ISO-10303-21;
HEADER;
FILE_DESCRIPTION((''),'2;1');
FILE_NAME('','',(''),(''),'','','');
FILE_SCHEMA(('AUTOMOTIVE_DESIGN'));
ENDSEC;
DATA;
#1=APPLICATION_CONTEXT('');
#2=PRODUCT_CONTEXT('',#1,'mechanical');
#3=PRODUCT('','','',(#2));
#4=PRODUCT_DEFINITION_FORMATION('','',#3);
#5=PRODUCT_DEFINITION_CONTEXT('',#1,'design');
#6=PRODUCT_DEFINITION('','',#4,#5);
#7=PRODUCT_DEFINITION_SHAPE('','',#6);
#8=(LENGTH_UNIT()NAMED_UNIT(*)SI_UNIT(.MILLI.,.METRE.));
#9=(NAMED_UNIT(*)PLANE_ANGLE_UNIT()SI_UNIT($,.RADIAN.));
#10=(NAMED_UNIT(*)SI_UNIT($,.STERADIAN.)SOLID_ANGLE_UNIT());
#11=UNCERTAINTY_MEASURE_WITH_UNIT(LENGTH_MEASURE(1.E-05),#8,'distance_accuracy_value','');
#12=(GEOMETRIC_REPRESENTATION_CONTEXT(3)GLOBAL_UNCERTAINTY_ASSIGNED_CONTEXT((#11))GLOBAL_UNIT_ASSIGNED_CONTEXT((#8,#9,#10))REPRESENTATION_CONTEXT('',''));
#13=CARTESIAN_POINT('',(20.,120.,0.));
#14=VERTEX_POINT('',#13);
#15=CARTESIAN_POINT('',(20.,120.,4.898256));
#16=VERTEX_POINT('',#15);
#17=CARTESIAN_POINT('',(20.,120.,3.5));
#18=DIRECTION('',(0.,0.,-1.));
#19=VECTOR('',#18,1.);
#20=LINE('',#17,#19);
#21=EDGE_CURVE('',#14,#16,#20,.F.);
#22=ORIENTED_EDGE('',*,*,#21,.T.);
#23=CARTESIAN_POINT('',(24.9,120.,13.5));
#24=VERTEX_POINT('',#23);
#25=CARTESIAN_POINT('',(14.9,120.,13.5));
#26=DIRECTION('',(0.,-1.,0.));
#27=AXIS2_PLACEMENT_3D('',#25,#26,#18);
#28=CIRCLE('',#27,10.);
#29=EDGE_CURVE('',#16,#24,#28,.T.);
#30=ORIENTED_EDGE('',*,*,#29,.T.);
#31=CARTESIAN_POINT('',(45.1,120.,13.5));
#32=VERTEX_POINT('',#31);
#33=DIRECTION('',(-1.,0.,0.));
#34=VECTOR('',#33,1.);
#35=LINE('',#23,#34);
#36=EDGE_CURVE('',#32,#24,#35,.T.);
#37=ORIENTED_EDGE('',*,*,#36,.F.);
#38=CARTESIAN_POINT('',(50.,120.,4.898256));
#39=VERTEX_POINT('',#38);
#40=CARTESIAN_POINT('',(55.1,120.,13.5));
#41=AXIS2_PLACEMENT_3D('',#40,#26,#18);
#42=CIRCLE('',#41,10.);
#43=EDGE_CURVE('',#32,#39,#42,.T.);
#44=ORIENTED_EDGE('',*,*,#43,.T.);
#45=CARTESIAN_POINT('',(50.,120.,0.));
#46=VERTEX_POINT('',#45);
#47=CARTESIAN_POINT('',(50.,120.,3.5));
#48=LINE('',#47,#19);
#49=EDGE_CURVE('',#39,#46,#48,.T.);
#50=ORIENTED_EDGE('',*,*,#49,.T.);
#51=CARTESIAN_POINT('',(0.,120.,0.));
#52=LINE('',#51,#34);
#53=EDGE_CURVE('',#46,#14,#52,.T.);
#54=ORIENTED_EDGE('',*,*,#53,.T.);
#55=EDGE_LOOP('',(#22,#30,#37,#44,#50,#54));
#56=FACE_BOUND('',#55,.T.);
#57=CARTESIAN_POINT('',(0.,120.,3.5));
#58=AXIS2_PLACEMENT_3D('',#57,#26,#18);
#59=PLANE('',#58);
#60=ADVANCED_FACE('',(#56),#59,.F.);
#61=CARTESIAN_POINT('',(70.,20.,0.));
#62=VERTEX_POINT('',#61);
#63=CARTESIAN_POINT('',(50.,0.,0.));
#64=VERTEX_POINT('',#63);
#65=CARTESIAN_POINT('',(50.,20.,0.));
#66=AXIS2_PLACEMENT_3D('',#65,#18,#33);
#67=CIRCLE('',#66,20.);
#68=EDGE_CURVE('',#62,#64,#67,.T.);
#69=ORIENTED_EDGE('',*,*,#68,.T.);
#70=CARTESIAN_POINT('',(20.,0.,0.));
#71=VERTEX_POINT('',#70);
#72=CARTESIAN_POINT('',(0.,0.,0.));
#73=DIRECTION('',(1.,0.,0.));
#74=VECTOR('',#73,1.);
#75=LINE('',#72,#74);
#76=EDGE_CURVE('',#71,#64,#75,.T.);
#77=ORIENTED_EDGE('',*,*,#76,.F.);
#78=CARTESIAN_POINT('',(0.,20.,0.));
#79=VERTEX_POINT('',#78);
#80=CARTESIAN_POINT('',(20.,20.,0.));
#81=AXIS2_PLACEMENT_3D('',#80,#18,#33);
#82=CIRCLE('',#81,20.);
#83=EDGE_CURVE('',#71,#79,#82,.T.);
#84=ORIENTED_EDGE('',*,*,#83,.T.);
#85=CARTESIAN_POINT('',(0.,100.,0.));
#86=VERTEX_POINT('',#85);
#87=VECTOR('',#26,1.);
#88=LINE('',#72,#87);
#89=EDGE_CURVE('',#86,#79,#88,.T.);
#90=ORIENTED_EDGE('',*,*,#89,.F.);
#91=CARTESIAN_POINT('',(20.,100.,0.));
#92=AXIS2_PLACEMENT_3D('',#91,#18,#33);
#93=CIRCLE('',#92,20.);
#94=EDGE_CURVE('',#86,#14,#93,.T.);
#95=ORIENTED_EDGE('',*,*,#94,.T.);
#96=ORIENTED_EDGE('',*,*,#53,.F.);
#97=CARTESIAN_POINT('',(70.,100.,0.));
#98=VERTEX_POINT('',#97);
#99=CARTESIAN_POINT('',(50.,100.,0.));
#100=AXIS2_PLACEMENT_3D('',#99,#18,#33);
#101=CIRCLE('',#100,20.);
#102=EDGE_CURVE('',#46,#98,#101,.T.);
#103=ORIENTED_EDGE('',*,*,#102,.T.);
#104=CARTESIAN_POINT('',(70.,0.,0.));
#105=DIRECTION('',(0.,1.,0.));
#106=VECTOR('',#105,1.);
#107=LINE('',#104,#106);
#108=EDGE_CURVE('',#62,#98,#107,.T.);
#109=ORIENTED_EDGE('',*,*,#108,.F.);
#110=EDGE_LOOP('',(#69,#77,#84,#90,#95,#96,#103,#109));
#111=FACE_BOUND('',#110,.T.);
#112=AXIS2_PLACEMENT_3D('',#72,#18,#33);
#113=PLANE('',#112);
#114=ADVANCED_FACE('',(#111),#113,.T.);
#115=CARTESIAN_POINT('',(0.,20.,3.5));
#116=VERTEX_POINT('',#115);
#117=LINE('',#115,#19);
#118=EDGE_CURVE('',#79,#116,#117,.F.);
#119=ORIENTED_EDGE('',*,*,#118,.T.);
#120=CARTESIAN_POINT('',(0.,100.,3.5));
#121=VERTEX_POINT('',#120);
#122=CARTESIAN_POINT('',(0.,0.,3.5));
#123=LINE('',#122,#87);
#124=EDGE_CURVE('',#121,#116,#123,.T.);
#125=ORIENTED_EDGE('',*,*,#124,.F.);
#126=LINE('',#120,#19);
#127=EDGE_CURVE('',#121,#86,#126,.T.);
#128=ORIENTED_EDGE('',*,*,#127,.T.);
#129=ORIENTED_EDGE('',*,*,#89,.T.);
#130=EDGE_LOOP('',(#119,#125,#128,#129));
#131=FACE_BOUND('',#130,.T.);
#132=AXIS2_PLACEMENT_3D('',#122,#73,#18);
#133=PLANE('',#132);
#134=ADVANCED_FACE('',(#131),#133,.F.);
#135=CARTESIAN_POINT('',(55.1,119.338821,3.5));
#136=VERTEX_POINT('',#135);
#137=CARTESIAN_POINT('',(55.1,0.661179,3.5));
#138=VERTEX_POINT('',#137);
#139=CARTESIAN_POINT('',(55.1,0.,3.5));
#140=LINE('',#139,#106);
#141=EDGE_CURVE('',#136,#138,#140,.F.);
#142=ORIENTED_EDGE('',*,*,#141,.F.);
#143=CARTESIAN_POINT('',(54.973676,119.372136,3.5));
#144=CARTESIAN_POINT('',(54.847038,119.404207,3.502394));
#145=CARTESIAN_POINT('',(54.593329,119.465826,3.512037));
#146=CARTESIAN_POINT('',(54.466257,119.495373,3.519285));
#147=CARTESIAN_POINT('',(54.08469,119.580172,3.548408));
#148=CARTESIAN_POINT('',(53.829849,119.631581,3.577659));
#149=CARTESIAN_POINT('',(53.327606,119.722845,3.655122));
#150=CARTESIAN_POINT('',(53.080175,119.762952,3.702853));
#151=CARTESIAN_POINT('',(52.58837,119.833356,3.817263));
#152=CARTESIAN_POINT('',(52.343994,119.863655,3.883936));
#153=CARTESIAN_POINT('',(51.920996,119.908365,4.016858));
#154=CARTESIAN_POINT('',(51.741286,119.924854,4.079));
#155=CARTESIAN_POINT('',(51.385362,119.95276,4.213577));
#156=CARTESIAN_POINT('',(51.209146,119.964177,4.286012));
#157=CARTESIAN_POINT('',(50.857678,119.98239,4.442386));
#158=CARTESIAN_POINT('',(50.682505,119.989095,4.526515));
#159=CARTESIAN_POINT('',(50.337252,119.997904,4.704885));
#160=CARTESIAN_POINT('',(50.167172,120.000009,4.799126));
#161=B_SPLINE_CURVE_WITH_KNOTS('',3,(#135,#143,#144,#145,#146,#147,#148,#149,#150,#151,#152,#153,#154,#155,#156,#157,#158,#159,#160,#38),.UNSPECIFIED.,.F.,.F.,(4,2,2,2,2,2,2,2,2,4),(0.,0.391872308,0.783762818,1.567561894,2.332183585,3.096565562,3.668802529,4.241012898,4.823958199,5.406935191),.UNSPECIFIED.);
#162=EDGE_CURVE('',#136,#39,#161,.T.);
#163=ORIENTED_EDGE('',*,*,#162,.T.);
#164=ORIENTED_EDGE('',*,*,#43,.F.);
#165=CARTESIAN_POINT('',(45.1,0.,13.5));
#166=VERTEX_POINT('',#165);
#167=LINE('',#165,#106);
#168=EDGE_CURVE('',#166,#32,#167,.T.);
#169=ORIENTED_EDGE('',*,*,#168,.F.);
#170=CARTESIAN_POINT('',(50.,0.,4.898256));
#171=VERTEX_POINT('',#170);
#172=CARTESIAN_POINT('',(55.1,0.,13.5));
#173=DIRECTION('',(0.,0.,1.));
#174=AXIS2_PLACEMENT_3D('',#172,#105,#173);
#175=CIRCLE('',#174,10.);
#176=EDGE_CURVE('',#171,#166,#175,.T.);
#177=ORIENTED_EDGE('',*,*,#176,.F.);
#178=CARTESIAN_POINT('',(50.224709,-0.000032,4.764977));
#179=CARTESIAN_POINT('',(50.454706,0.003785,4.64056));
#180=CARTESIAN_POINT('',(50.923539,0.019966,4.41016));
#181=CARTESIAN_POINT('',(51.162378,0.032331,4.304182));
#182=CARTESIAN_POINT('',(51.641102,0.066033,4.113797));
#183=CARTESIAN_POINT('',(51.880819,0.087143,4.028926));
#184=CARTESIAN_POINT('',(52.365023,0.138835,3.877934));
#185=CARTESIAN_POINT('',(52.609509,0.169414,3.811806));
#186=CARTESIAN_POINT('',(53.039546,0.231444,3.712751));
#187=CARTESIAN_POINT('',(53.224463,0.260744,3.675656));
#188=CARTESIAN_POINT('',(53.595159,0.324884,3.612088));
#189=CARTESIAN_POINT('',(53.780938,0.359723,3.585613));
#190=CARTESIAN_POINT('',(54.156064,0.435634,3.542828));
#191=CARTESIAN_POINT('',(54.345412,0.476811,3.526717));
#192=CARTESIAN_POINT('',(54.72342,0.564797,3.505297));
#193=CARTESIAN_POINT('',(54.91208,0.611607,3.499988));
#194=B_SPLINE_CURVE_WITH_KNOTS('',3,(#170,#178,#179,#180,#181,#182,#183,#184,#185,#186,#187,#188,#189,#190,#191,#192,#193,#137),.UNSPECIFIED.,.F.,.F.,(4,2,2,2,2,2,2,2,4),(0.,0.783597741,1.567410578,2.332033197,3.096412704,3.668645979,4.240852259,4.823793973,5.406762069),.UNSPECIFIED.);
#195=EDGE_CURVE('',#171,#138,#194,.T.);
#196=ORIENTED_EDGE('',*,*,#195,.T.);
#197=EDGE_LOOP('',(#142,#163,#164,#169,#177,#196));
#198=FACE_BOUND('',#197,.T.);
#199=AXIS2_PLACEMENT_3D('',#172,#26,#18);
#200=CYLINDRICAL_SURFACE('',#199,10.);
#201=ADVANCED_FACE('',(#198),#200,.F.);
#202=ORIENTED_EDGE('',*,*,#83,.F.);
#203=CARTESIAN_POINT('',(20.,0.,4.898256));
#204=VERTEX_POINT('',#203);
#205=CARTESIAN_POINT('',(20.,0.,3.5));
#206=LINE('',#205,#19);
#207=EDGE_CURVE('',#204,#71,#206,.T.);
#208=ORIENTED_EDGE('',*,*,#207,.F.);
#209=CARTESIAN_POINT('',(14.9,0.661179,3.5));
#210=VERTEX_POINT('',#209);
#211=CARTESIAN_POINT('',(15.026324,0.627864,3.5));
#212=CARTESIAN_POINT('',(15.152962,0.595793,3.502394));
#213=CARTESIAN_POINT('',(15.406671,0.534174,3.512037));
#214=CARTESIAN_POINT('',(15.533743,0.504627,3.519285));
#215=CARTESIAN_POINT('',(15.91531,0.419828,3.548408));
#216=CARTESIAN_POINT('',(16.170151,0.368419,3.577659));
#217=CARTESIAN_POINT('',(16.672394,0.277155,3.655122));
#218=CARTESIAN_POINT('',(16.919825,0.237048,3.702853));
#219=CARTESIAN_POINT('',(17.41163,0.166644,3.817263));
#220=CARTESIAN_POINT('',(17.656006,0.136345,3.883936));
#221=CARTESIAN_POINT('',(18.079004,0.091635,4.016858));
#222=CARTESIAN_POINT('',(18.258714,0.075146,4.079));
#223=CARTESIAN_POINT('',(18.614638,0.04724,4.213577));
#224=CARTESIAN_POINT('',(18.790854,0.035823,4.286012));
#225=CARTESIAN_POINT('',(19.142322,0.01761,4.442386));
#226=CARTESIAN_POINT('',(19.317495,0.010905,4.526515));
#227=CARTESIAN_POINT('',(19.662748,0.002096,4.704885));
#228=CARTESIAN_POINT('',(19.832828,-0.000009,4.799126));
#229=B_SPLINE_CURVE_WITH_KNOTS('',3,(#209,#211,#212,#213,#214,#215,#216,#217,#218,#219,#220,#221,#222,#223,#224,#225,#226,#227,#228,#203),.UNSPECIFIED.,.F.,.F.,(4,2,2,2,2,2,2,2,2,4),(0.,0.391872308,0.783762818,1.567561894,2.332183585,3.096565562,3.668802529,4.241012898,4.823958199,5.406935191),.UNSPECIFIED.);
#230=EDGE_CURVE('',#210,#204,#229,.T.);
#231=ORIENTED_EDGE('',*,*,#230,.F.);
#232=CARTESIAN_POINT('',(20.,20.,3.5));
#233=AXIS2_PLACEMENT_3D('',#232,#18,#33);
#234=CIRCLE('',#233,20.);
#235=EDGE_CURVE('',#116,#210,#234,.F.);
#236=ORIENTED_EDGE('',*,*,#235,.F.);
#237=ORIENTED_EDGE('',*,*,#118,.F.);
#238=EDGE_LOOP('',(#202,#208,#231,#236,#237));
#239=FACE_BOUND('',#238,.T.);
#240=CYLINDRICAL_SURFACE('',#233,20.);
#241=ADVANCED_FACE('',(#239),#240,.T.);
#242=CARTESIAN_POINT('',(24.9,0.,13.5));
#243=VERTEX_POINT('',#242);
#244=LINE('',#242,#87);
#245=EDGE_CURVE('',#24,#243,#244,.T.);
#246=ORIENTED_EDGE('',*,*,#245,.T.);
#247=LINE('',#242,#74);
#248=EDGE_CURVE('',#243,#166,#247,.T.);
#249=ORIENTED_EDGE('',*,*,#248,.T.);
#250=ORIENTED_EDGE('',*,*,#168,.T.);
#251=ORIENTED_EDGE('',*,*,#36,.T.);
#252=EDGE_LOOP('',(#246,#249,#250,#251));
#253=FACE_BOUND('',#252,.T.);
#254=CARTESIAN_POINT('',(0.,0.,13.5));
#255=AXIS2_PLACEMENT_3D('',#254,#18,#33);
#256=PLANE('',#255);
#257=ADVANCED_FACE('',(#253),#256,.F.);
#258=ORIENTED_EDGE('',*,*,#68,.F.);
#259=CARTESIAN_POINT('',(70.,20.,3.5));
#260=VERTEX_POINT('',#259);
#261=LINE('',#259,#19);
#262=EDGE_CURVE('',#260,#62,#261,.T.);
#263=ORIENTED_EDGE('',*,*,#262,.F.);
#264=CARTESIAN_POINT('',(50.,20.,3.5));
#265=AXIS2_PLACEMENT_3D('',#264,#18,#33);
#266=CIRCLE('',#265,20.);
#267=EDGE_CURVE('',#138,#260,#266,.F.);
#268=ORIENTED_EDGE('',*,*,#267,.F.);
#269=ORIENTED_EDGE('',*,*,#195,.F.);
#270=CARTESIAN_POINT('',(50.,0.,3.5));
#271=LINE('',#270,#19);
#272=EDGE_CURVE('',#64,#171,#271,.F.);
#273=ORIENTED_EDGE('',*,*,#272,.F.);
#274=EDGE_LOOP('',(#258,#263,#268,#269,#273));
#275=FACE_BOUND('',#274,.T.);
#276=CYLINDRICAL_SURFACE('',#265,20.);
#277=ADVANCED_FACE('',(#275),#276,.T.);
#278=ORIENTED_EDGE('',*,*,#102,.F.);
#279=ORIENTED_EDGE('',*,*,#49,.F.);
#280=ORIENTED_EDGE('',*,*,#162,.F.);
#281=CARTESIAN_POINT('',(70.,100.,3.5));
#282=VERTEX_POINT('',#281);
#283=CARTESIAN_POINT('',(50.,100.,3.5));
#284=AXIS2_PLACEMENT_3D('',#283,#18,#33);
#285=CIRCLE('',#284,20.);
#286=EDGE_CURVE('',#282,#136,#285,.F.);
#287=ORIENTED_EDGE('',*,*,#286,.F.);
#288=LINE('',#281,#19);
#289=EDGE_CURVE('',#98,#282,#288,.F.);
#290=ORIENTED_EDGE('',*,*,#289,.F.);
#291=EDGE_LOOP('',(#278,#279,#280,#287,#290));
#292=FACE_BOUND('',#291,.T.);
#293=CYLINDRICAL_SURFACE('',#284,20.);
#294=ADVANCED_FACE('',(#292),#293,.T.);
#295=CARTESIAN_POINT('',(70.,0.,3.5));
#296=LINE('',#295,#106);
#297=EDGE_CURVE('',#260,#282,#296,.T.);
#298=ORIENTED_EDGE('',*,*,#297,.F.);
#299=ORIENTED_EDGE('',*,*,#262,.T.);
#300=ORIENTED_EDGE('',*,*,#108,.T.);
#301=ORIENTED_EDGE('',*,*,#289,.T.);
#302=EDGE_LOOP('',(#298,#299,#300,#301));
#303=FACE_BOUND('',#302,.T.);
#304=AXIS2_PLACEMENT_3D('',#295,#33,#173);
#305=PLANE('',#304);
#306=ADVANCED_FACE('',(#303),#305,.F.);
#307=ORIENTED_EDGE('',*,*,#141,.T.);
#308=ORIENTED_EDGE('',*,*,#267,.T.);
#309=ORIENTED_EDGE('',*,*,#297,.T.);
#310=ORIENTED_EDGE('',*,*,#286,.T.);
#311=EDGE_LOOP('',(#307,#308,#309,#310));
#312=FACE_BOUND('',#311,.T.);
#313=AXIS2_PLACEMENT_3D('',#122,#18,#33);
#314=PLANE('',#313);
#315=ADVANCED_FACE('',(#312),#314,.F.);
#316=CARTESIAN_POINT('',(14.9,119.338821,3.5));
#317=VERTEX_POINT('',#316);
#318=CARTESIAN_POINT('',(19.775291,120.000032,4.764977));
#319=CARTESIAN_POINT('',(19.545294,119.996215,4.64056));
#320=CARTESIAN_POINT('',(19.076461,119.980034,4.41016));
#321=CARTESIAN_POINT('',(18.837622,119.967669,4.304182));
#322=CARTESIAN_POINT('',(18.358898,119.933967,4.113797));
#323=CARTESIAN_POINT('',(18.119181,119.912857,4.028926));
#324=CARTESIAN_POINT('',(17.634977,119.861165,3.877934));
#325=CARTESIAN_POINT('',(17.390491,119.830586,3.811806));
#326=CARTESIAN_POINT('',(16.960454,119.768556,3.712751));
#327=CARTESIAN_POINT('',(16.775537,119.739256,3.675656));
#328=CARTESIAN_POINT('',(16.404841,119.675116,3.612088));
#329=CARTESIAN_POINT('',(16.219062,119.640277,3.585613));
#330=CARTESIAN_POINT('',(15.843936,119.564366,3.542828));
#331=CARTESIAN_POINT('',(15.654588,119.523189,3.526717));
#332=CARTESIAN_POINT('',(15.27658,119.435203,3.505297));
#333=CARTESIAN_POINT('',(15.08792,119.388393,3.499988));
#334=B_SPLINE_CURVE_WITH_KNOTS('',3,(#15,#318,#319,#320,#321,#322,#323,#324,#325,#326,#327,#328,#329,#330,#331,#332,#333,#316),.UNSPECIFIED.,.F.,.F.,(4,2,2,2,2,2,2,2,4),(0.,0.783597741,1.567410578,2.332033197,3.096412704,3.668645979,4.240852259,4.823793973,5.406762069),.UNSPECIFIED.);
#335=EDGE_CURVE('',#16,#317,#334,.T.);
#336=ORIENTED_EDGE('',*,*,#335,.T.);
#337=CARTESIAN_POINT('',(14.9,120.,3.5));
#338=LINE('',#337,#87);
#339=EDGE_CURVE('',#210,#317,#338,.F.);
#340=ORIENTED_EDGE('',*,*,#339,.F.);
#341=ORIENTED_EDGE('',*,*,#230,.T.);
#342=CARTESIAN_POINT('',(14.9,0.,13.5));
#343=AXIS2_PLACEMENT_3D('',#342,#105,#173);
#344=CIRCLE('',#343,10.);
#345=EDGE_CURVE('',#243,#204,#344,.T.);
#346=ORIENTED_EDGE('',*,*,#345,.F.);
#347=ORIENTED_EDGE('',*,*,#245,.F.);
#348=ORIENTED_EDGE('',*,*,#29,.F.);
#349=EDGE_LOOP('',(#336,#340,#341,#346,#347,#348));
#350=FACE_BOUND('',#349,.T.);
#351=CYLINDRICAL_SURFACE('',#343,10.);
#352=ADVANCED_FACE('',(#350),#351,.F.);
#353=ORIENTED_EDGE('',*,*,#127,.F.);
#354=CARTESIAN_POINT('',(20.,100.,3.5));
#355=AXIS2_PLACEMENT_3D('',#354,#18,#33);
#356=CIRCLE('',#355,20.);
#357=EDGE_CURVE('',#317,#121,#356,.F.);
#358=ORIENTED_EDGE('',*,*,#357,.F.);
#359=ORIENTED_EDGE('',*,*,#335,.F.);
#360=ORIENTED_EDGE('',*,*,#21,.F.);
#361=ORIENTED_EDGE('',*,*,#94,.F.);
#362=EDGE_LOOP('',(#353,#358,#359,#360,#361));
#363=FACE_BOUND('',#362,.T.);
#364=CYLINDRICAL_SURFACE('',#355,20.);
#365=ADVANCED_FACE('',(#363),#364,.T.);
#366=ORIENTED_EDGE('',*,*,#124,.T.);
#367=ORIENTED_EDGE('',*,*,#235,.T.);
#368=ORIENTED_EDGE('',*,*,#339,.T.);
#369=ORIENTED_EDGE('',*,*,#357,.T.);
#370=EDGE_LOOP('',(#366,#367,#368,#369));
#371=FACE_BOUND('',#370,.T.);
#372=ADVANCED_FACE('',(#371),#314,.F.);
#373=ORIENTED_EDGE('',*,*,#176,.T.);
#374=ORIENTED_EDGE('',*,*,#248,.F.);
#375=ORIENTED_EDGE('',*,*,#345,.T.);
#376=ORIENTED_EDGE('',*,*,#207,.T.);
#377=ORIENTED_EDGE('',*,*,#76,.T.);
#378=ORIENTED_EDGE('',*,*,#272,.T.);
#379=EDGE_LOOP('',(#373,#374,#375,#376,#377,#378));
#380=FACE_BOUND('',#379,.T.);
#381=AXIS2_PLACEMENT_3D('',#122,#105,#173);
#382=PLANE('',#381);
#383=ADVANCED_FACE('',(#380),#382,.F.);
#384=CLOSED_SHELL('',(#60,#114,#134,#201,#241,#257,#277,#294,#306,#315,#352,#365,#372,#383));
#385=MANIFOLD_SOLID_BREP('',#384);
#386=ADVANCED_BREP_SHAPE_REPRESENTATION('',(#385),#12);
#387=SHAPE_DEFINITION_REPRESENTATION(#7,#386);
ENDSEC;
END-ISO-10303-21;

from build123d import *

# Parameters (mm, degrees)
SKETCH_1_W      = 70
SKETCH_1_H      = 120
EXTRUDE_1_DEPTH = 3.5
SKETCH_2_W      = 20.2
SKETCH_2_H      = 120
EXTRUDE_2_DEPTH = 10
FILLET_1_R      = 10
FILLET_2_R      = 20


with BuildPart() as part:
    # ｽｹｯﾁ1 → ﾎﾞｽ - 押し出し1 (new body)
    with BuildSketch(Plane.XY):
        with Locations((35, 60)):
            Rectangle(SKETCH_1_W, SKETCH_1_H)
    extrude(amount=EXTRUDE_1_DEPTH)

    # ｽｹｯﾁ2 → ﾎﾞｽ - 押し出し2 (add)
    with BuildSketch(Plane.XY.offset(3.5)):
        with Locations((35, 60)):
            Rectangle(SKETCH_2_W, SKETCH_2_H)
    extrude(amount=EXTRUDE_2_DEPTH)

    # ﾌｨﾚｯﾄ1
    fillet_1_edges = [part.edges().sort_by_distance(p)[0] for p in [
        (24.9, 60, 3.5),
        (45.1, 60, 3.5),
    ]]
    fillet(fillet_1_edges, radius=FILLET_1_R - 0.0001)  # a hair under: the kernel refuses the full size

    # ﾌｨﾚｯﾄ2
    fillet_2_edges = [part.edges().sort_by_distance(p)[0] for p in [
        (70, 120, 1.75),
        (70, 0, 1.75),
        (0, 0, 1.75),
        (0, 120, 1.75),
    ]]
    fillet(fillet_2_edges, radius=FILLET_2_R)


solid = part.part
